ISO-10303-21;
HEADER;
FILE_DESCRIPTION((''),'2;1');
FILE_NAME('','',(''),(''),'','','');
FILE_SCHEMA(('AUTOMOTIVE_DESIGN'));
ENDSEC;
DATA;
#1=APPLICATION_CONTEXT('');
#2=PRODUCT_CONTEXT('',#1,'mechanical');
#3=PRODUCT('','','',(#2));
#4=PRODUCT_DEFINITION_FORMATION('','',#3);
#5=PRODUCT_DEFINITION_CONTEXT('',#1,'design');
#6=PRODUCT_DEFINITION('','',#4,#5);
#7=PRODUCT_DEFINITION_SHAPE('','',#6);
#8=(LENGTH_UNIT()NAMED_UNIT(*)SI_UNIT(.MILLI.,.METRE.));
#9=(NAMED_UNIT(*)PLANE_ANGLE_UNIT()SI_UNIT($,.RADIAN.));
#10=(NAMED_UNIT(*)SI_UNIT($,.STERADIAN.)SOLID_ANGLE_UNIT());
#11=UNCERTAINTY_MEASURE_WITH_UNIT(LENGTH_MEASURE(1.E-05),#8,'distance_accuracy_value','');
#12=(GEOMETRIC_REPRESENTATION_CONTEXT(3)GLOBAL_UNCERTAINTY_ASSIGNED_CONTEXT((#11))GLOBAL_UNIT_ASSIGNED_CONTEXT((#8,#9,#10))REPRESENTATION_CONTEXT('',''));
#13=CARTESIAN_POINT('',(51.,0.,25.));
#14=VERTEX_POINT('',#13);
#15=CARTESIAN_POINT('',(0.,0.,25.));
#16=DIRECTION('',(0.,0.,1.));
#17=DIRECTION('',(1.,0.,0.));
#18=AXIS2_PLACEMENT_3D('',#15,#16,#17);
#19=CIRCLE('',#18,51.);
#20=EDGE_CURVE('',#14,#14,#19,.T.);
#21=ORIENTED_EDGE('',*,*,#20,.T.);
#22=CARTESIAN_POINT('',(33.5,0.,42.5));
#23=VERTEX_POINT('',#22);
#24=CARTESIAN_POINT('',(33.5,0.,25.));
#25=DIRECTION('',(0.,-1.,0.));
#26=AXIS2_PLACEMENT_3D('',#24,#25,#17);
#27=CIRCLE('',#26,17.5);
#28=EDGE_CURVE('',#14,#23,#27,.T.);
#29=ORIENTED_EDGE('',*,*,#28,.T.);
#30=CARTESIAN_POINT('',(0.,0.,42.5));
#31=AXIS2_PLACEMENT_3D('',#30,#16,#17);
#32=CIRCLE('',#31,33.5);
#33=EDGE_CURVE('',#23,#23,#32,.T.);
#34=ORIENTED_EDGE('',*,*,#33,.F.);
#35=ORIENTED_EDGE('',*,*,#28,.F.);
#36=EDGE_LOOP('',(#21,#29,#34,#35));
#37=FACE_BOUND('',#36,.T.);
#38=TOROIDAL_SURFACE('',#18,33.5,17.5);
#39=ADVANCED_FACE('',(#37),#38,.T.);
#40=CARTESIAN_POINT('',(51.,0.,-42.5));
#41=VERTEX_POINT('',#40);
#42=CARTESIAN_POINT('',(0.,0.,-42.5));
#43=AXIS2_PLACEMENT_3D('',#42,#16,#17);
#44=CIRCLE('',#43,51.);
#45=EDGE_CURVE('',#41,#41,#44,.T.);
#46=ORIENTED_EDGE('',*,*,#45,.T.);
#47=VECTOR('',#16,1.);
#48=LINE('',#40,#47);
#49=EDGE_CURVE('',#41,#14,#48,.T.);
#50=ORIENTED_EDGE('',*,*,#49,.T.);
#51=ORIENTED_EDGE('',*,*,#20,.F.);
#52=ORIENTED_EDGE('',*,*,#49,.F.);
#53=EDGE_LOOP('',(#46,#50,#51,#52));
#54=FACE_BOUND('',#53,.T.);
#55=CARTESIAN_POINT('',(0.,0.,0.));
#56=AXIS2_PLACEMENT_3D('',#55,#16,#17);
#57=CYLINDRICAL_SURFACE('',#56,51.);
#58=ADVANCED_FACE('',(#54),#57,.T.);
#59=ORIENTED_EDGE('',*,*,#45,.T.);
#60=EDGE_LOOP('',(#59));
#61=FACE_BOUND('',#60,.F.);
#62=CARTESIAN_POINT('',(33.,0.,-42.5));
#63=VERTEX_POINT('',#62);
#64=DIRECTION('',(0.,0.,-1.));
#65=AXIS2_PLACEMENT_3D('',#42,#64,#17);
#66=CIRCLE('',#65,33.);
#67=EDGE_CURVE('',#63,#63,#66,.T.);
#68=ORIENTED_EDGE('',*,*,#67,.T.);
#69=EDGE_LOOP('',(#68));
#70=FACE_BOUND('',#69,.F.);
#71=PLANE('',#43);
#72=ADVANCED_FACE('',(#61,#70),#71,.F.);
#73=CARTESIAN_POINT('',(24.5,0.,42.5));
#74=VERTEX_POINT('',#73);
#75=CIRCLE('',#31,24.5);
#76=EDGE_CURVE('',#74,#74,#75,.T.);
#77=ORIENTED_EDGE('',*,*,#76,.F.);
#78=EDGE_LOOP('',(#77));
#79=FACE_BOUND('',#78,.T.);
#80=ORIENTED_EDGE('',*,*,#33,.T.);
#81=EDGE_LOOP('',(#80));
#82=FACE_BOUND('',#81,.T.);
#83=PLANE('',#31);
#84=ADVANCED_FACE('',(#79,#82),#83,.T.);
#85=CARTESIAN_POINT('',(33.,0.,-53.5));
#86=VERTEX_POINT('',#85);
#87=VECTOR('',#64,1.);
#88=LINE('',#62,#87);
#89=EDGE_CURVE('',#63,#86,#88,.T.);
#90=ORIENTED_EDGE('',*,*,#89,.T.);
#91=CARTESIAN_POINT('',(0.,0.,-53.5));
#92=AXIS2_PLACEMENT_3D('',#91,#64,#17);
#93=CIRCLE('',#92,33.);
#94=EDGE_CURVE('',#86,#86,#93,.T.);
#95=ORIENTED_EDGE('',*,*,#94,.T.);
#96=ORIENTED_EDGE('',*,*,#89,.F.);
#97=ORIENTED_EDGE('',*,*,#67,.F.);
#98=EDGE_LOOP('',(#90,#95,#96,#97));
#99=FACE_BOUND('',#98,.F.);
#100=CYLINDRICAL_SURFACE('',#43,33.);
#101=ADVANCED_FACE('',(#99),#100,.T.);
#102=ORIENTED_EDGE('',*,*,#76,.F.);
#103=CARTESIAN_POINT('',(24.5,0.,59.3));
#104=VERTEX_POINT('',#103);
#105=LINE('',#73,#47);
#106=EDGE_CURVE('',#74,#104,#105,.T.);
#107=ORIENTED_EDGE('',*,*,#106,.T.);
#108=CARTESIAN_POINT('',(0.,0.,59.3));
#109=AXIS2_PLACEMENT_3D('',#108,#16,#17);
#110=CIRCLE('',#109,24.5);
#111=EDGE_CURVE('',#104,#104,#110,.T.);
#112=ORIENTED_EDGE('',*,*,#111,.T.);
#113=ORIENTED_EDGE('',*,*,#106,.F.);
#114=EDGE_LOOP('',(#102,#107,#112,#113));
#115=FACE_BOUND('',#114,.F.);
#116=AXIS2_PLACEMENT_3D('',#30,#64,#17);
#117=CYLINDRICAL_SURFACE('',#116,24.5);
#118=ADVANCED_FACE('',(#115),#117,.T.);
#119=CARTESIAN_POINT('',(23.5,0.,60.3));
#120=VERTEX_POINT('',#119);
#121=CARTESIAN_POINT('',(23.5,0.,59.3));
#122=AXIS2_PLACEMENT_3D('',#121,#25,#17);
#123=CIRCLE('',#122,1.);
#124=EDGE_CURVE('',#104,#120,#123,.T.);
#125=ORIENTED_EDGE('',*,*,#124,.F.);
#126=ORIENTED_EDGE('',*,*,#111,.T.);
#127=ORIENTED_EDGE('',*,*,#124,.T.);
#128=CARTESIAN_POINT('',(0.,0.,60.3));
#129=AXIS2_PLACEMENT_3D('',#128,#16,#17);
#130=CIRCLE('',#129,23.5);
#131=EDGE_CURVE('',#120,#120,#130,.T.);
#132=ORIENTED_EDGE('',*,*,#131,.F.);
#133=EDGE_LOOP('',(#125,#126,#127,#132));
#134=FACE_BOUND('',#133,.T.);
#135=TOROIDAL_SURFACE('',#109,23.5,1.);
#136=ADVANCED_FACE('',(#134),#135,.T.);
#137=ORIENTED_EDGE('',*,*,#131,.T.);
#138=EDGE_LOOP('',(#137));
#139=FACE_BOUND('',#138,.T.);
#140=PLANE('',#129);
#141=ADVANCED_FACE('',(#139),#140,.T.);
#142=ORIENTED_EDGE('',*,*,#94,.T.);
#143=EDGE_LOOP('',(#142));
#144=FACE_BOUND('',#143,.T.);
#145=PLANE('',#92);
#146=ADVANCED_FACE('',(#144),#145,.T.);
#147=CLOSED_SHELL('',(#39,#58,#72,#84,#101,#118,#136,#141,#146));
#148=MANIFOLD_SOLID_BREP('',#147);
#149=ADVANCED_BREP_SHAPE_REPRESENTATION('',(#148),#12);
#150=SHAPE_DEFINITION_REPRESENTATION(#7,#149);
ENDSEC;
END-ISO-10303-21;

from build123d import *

# Parameters (mm, degrees)
F0_R     = 51
F1_DEPTH = 42.5
F2_R     = 17.5
F3_R     = 24.5
F4_DEPTH = 17.8
F5_R     = 1
F6_DEPTH = 42.5
F7_R     = 33
F8_DEPTH = 11


# Not quite as in the source:
# - a feature of the source that left no trace in its solid (it failed there, or was rolled back) is left out


with BuildPart() as f1:
    # F0 (on Top) → F1 (new body)
    with BuildSketch(Plane.XY):
        Circle(F0_R)
    extrude(amount=F1_DEPTH)

    # F2
    f2_edges = [f1.edges().sort_by_distance(p)[0] for p in [
        (-51, 0, 42.5),
    ]]
    fillet(f2_edges, radius=F2_R)

    # F3 (on face) → F4 (join)
    with BuildSketch(Plane.XY.offset(42.5)):
        Circle(F3_R)
    extrude(amount=F4_DEPTH)

    # F5
    f5_edges = [f1.edges().sort_by_distance(p)[0] for p in [
        (-24.5, 0, 60.3),
    ]]
    fillet(f5_edges, radius=F5_R)

    # F6 (add): a face of the model
    f6_faces = [f1.faces().sort_by_distance(p)[0] for p in [
        (0, 0, 0),
    ]]
    extrude(f6_faces, amount=F6_DEPTH)

    # F7 (on face) → F8 (join)
    with BuildSketch(Plane(origin=(0, 0, -42.5), x_dir=(1, 0, 0), z_dir=(0, 0, -1))):
        Circle(F7_R)
    extrude(amount=F8_DEPTH)


solid = f1.part
